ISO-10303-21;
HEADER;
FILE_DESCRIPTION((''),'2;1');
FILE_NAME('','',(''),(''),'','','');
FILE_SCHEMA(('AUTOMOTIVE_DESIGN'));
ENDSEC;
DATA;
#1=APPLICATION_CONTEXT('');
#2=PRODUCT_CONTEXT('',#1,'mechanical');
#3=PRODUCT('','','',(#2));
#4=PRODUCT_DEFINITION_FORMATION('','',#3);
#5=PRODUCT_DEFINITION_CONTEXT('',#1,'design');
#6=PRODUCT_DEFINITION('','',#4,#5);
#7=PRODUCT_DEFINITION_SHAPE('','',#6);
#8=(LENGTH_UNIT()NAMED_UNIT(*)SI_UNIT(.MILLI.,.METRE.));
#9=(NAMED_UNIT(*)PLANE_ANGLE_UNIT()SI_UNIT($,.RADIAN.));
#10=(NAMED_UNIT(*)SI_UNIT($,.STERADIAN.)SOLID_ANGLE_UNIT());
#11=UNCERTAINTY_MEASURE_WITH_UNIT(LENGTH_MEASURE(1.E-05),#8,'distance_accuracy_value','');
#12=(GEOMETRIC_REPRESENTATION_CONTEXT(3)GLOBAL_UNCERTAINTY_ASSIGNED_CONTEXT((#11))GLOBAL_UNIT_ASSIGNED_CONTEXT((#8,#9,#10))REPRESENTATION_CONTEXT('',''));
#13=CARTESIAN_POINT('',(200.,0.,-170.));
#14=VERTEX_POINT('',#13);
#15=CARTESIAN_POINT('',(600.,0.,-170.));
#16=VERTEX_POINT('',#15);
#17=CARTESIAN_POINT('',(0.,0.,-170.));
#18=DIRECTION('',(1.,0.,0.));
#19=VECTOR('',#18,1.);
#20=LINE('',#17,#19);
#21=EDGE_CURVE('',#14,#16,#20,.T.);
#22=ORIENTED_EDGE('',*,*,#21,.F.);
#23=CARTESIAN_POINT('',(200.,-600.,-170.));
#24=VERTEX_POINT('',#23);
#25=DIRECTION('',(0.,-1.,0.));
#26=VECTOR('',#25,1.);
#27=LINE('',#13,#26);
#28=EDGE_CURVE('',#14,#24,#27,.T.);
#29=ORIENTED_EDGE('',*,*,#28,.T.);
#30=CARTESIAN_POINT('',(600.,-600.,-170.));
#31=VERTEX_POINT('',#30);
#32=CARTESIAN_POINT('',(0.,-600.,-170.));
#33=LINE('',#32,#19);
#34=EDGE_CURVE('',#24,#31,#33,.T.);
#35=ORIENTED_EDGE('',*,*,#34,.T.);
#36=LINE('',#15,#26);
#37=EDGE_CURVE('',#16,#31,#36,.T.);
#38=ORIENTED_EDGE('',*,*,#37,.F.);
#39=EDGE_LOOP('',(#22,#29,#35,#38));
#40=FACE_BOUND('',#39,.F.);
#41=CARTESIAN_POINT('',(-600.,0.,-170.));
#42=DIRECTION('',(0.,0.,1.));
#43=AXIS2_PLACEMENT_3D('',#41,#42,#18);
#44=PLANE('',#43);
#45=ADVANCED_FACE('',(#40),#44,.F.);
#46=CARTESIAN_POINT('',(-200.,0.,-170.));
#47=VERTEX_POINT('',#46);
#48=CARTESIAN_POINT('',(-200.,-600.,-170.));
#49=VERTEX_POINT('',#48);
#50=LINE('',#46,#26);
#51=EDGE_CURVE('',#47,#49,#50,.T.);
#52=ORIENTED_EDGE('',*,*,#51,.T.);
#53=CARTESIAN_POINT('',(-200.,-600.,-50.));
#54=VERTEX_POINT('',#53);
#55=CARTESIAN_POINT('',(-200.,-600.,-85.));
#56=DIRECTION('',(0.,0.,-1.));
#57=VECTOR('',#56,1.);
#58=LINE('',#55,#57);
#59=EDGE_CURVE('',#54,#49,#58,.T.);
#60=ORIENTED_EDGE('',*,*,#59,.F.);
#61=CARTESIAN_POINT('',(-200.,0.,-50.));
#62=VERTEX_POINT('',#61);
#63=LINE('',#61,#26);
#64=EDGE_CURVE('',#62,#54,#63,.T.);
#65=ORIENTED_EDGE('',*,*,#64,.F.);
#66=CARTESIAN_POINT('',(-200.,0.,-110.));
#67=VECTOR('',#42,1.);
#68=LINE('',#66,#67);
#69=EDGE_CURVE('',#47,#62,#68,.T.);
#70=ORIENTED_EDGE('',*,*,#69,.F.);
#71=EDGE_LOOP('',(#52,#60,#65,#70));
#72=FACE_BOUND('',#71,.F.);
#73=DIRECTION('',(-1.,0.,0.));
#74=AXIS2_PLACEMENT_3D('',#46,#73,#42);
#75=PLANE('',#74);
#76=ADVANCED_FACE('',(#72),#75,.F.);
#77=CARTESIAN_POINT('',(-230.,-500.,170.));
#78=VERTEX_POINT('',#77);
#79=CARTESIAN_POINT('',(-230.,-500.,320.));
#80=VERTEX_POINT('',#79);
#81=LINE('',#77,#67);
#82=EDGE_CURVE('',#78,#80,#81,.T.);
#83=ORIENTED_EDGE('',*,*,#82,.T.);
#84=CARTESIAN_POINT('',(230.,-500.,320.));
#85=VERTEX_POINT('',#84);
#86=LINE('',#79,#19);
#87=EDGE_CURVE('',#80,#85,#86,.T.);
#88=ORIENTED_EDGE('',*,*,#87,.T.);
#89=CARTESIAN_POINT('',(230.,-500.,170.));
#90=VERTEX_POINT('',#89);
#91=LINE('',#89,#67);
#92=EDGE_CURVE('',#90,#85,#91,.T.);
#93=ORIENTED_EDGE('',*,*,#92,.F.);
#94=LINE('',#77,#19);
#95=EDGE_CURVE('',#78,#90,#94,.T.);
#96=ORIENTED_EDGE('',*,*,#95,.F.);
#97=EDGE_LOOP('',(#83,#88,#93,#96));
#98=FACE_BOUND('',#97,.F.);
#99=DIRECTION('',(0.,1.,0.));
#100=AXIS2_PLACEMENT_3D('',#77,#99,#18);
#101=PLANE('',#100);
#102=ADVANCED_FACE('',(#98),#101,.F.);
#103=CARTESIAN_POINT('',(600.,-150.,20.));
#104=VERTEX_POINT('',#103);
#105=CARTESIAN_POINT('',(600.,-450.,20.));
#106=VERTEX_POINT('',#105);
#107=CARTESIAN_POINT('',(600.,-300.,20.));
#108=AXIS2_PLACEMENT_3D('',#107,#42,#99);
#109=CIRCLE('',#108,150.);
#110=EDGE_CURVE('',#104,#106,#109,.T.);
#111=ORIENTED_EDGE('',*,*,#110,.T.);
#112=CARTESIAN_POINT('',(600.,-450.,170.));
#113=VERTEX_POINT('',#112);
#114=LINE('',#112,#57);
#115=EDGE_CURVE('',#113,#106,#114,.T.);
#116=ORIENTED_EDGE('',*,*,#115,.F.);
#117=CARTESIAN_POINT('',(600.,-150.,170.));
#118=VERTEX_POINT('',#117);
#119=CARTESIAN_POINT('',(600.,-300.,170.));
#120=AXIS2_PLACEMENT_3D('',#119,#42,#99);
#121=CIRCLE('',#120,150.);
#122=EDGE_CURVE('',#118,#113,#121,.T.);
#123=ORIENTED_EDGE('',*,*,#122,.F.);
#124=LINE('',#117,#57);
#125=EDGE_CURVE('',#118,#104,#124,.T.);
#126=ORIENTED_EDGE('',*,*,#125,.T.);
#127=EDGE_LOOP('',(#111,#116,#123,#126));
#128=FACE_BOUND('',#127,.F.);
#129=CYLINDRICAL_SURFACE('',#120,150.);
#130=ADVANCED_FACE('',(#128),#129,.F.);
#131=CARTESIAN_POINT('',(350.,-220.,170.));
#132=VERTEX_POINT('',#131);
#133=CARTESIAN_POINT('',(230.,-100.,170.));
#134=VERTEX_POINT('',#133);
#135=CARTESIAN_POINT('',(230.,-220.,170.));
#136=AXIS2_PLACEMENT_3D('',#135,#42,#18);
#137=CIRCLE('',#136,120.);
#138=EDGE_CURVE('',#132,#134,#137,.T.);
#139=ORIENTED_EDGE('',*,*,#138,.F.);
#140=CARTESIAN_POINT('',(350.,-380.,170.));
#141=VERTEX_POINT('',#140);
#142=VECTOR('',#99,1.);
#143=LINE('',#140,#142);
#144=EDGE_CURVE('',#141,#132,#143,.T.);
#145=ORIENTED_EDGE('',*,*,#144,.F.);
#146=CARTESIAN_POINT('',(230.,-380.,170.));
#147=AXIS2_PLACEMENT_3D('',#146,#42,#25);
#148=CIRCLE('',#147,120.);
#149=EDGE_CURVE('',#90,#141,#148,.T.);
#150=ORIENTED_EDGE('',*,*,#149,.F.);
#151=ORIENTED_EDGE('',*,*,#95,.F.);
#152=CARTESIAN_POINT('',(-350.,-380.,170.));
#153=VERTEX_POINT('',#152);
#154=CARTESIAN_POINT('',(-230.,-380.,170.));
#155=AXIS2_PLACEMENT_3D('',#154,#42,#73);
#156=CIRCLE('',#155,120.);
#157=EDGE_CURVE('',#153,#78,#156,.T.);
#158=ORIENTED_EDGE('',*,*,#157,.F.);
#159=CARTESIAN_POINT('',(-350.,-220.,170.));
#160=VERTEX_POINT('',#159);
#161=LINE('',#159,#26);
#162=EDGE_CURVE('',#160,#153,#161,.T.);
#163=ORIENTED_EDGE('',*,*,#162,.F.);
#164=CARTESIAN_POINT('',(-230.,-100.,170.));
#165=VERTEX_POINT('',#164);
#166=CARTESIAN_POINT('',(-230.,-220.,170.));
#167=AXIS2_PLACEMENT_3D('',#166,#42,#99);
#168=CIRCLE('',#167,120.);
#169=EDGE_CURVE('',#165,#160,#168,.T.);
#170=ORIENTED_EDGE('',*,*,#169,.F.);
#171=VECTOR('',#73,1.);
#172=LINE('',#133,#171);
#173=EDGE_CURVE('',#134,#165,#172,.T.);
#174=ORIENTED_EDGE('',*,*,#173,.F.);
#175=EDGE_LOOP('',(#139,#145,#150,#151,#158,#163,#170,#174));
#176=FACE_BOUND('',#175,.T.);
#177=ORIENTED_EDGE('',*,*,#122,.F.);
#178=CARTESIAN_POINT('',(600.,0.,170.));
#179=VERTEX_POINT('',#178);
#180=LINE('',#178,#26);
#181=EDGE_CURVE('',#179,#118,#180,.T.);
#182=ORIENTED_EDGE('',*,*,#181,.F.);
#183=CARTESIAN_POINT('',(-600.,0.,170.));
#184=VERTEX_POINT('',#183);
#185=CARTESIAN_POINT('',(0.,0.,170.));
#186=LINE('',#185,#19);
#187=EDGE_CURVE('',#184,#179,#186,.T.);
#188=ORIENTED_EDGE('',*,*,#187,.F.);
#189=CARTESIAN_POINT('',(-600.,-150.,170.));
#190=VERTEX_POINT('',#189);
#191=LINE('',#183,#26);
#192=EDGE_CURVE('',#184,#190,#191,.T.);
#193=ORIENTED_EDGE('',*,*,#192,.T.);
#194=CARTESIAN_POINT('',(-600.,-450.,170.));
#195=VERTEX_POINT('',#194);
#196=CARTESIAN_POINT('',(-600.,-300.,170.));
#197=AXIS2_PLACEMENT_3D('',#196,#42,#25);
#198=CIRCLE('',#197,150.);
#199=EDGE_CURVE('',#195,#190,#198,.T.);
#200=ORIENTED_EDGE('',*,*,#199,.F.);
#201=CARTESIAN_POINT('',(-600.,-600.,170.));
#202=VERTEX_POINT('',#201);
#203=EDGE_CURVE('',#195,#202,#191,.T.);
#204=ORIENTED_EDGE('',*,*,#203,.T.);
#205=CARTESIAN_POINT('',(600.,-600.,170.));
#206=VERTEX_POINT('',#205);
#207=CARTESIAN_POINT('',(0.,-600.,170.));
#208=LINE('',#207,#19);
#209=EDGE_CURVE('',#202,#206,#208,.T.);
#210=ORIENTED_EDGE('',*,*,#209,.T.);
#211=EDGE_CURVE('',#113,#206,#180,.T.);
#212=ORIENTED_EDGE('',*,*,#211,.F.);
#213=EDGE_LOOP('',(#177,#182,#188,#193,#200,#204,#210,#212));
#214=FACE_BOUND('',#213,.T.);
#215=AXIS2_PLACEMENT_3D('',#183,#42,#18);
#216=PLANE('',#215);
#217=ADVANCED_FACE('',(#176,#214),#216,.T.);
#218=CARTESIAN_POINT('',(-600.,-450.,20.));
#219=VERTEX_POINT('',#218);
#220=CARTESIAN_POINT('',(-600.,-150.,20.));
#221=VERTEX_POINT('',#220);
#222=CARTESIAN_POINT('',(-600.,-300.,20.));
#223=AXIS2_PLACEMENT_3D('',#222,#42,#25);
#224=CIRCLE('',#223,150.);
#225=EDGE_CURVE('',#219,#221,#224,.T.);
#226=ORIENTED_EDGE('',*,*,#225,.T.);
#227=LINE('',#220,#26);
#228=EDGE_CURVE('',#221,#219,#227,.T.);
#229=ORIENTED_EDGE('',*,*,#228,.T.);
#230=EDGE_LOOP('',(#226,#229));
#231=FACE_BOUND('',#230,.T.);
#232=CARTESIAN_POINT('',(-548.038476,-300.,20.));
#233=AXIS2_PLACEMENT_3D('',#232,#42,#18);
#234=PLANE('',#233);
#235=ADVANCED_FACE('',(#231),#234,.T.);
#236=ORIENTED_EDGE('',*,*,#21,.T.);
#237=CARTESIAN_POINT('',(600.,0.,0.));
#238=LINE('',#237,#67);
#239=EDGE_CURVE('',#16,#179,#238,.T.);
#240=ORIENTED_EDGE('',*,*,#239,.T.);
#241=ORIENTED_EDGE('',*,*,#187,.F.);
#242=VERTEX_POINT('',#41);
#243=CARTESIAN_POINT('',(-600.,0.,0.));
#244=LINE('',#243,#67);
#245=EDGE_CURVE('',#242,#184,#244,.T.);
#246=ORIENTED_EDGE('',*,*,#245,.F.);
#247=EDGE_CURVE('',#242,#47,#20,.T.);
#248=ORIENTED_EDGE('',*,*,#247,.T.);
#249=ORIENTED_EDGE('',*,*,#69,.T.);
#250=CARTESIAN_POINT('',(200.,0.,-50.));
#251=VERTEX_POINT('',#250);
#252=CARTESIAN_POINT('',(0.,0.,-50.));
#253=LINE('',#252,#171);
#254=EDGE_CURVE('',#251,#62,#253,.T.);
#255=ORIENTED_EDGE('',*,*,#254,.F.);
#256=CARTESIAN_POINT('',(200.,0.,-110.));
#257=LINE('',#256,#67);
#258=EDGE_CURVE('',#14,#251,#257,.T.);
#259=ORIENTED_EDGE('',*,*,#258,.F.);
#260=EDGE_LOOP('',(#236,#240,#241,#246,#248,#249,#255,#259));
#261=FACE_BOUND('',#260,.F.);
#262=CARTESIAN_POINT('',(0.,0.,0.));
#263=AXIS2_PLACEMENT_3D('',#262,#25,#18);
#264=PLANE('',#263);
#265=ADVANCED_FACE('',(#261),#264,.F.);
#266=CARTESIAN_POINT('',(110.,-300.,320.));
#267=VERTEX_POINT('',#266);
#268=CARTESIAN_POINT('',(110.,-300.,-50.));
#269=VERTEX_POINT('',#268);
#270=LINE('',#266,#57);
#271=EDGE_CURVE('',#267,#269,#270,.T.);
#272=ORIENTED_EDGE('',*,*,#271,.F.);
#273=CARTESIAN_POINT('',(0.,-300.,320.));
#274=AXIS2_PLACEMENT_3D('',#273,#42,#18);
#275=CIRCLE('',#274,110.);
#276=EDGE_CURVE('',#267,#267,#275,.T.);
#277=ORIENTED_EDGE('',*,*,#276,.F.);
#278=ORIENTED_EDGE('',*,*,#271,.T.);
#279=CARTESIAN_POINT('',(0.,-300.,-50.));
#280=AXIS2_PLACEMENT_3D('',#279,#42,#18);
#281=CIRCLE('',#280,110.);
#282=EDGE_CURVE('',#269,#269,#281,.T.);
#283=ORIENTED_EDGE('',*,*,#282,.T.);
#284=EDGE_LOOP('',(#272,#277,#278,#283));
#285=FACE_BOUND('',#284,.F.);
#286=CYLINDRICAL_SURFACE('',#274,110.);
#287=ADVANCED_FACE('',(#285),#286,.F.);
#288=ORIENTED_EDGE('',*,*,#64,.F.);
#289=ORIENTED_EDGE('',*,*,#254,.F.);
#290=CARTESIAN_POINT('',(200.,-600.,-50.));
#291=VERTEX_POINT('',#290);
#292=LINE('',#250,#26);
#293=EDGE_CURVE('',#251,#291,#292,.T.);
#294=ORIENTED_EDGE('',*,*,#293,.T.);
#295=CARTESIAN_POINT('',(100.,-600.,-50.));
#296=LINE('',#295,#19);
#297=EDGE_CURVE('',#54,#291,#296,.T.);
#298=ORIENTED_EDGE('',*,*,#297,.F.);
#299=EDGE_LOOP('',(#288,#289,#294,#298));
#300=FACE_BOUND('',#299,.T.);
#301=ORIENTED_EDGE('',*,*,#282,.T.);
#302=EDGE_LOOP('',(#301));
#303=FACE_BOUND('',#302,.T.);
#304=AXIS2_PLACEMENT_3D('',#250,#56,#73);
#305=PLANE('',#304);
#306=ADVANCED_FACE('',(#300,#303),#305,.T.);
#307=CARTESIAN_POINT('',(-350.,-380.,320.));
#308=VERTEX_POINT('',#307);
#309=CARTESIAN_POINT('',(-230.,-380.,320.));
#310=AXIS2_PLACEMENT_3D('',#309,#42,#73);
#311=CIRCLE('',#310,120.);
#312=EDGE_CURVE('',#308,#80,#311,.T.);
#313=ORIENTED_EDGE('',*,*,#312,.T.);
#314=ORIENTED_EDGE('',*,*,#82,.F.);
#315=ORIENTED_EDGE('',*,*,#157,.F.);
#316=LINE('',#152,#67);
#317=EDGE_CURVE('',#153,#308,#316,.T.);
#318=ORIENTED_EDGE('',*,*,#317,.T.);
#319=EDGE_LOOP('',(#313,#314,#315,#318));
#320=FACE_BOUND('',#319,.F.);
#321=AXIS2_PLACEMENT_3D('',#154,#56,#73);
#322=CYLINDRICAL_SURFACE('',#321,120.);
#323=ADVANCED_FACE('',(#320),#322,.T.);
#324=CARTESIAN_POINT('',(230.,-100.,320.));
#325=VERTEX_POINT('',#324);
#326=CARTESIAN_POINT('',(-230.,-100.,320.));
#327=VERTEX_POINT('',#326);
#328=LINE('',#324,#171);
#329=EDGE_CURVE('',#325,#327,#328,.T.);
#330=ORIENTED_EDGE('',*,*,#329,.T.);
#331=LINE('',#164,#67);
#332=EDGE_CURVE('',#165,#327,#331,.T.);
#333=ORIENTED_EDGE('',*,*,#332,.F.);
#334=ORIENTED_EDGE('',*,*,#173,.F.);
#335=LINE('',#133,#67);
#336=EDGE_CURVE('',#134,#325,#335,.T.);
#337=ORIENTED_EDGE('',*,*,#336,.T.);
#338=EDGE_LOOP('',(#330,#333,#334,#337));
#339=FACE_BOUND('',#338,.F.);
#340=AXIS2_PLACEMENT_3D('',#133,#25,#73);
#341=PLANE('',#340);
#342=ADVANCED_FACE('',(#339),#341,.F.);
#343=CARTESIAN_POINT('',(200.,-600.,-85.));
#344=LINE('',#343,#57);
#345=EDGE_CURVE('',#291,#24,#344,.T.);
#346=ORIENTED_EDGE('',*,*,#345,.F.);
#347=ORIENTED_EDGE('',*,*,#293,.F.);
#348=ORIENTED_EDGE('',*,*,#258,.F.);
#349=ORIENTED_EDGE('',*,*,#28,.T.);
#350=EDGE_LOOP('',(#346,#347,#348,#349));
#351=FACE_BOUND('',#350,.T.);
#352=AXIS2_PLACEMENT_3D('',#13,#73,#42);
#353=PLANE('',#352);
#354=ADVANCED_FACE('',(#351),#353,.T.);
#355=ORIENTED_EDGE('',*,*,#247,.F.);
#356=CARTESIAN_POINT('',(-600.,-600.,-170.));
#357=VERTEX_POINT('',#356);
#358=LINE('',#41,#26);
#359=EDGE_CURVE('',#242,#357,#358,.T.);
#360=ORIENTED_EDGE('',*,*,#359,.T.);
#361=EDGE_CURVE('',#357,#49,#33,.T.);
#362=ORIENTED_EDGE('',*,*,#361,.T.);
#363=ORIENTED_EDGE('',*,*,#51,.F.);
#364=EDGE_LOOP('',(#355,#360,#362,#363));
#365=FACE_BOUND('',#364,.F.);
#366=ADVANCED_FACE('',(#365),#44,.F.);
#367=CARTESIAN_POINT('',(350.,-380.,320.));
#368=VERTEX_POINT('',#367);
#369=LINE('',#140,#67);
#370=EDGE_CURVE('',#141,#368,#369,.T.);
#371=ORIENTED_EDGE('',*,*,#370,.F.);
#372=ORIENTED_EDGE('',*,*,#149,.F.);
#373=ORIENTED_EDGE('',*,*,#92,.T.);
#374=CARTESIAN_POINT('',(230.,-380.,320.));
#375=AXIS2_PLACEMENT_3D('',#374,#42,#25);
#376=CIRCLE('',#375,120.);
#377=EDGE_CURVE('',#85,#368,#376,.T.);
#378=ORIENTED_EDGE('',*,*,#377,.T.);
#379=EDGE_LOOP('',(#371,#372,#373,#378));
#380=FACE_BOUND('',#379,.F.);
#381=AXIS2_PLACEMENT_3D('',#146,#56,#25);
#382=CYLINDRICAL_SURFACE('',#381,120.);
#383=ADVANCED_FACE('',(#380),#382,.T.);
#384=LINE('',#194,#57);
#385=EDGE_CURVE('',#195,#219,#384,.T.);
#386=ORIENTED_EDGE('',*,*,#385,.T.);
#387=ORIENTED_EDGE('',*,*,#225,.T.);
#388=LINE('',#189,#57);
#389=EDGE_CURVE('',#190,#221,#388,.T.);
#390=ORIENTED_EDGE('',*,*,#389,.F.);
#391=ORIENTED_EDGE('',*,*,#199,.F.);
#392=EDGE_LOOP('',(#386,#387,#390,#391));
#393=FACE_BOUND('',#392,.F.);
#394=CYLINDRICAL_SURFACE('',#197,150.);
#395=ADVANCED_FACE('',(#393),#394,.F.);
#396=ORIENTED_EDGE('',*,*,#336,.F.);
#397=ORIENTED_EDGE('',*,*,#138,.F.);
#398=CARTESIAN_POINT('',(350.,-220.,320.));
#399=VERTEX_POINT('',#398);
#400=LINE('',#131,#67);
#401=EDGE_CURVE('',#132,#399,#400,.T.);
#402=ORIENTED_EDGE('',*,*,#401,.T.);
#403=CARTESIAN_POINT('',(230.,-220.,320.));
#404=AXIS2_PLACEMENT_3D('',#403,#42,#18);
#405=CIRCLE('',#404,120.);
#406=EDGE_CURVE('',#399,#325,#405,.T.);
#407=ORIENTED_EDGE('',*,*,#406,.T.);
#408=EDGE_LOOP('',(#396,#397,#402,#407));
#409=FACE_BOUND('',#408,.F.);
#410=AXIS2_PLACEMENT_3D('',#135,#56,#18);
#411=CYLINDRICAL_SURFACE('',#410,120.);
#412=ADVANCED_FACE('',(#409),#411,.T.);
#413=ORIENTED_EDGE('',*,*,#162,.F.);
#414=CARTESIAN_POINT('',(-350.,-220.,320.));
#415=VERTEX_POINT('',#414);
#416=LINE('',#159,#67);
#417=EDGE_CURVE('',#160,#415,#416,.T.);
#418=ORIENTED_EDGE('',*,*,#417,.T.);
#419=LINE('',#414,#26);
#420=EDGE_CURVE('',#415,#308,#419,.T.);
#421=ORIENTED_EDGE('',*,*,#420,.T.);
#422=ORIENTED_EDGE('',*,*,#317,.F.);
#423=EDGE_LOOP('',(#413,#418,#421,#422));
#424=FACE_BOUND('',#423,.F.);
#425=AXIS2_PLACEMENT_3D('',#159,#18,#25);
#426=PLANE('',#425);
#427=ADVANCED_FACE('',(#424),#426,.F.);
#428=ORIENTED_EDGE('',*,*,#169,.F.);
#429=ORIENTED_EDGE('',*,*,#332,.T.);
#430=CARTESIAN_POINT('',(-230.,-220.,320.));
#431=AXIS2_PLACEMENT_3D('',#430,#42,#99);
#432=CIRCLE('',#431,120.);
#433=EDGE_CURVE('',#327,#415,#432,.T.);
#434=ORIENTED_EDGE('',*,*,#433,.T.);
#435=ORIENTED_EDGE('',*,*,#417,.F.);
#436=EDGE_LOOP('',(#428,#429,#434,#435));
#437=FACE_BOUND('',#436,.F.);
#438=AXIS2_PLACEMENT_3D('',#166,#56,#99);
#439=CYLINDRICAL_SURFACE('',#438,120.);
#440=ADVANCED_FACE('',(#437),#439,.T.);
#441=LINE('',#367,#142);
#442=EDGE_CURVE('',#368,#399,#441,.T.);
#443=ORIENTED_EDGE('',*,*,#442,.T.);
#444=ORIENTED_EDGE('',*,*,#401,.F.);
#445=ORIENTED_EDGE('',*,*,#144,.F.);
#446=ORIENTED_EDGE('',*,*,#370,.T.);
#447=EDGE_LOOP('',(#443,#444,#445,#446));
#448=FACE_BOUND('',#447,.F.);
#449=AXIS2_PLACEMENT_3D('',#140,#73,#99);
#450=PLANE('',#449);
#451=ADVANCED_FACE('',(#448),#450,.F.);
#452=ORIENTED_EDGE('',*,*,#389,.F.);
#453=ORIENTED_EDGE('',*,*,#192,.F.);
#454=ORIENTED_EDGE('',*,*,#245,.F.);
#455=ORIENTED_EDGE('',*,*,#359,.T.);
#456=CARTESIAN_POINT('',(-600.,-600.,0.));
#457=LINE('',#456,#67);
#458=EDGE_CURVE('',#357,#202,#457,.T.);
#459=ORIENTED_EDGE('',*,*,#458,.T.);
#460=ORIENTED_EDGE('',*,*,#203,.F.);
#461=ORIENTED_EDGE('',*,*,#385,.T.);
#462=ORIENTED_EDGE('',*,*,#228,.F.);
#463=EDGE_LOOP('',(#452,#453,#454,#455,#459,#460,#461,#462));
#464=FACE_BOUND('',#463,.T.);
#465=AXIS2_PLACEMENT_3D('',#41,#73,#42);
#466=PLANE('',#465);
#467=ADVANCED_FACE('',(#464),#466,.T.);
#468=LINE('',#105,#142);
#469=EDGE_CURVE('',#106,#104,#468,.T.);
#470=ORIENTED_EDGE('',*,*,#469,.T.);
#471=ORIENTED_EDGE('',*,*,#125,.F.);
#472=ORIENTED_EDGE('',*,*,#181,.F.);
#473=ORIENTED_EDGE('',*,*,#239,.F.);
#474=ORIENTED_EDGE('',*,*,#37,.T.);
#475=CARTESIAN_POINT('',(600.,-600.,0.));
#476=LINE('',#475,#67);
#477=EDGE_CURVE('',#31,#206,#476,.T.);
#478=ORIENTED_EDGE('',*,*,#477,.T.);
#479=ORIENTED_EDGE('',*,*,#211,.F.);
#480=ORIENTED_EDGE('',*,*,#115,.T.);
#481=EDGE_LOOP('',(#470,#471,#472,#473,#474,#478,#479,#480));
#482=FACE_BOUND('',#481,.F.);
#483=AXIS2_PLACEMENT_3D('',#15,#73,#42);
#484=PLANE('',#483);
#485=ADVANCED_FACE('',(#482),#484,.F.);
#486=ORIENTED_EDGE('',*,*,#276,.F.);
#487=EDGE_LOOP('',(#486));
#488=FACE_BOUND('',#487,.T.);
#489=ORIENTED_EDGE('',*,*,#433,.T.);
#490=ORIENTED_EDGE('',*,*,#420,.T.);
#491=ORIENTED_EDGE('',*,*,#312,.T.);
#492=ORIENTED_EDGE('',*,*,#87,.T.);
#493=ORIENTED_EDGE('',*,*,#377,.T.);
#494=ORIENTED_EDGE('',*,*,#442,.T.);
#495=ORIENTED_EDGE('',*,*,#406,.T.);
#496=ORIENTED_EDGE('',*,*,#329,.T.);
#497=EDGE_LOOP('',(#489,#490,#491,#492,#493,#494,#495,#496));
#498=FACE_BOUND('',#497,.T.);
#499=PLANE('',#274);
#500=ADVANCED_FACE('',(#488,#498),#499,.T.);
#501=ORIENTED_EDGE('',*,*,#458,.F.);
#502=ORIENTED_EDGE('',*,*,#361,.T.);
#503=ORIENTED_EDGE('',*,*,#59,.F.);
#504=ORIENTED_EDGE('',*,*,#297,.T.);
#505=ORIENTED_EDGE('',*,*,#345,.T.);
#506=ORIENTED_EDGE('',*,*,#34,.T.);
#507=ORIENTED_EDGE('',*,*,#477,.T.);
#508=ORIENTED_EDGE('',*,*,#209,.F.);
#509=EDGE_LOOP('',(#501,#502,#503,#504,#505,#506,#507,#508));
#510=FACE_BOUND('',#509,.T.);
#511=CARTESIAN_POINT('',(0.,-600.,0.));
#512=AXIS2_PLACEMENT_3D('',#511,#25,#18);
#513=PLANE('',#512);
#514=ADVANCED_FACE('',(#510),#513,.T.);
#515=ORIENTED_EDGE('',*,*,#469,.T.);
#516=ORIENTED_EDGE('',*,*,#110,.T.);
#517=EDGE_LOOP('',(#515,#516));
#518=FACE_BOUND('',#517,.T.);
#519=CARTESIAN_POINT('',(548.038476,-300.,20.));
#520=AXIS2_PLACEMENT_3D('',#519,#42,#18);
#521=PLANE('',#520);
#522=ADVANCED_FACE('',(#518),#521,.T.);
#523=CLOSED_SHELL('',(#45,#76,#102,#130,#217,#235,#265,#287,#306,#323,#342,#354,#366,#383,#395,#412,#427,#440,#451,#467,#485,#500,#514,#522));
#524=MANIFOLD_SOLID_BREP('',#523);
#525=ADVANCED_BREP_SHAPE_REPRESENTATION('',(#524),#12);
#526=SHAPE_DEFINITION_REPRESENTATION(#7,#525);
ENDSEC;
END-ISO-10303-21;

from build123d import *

# Parameters (mm, degrees)
F0_W     = 1200
F0_H     = 340
F1_DEPTH = 600
F3_DEPTH = 150
F4_W     = 400
F4_H     = 120
F5_DEPTH = 600.001
F7_DEPTH = 150
F8_R     = 110
F9_DEPTH = 490.001


# Not quite as in the source:
# - a feature names something its author has since deleted; it is built from what else it names


with BuildPart() as f1:
    # F0 (on Front) → F1 (new body)
    with BuildSketch(Plane.XZ):
        Rectangle(F0_W, F0_H)
    extrude(amount=F1_DEPTH)

    # F2 (on face) → F3 (cut)
    with BuildSketch(Plane.XY.offset(170)):
        with BuildLine():
            Line((-600, -150), (-600, -450))
            ThreePointArc((-600, -450), (-450, -300), (-600, -150))
        make_face()
        with BuildLine():
            ThreePointArc((600, -150), (450, -300), (600, -450))
            Line((600, -450), (600, -150))
        make_face()
    extrude(amount=-F3_DEPTH, mode=Mode.SUBTRACT)

    # F4 (on face) → F5 (cut, through all)
    with BuildSketch(Plane(origin=(0, 0, 0), x_dir=(-1, 0, 0), z_dir=(0, 1, 0))):
        with Locations((0, -110)):
            Rectangle(F4_W, F4_H)
    extrude(amount=-F5_DEPTH, mode=Mode.SUBTRACT)

    # F6 (on face) → F7 (join)
    with BuildSketch(Plane.XY.offset(170)):
        with BuildLine():
            Line((230, -100), (-230, -100))
            ThreePointArc((-230, -100), (-314.8528137424, -135.1471862576), (-350, -220))
            Line((-350, -220), (-350, -380))
            ThreePointArc((-350, -380), (-314.8528137424, -464.8528137424), (-230, -500))
            Line((-230, -500), (230, -500))
            ThreePointArc((230, -500), (314.8528137424, -464.8528137424), (350, -380))
            Line((350, -380), (350, -220))
            ThreePointArc((350, -220), (314.8528137424, -135.1471862576), (230, -100))
        make_face()
    extrude(amount=F7_DEPTH)

    # F8 (on face) → F9 (cut, through all)
    with BuildSketch(Plane.XY.offset(320)):
        with Locations((0, -300)):
            Circle(F8_R)
    extrude(amount=-F9_DEPTH, mode=Mode.SUBTRACT)


solid = f1.part
